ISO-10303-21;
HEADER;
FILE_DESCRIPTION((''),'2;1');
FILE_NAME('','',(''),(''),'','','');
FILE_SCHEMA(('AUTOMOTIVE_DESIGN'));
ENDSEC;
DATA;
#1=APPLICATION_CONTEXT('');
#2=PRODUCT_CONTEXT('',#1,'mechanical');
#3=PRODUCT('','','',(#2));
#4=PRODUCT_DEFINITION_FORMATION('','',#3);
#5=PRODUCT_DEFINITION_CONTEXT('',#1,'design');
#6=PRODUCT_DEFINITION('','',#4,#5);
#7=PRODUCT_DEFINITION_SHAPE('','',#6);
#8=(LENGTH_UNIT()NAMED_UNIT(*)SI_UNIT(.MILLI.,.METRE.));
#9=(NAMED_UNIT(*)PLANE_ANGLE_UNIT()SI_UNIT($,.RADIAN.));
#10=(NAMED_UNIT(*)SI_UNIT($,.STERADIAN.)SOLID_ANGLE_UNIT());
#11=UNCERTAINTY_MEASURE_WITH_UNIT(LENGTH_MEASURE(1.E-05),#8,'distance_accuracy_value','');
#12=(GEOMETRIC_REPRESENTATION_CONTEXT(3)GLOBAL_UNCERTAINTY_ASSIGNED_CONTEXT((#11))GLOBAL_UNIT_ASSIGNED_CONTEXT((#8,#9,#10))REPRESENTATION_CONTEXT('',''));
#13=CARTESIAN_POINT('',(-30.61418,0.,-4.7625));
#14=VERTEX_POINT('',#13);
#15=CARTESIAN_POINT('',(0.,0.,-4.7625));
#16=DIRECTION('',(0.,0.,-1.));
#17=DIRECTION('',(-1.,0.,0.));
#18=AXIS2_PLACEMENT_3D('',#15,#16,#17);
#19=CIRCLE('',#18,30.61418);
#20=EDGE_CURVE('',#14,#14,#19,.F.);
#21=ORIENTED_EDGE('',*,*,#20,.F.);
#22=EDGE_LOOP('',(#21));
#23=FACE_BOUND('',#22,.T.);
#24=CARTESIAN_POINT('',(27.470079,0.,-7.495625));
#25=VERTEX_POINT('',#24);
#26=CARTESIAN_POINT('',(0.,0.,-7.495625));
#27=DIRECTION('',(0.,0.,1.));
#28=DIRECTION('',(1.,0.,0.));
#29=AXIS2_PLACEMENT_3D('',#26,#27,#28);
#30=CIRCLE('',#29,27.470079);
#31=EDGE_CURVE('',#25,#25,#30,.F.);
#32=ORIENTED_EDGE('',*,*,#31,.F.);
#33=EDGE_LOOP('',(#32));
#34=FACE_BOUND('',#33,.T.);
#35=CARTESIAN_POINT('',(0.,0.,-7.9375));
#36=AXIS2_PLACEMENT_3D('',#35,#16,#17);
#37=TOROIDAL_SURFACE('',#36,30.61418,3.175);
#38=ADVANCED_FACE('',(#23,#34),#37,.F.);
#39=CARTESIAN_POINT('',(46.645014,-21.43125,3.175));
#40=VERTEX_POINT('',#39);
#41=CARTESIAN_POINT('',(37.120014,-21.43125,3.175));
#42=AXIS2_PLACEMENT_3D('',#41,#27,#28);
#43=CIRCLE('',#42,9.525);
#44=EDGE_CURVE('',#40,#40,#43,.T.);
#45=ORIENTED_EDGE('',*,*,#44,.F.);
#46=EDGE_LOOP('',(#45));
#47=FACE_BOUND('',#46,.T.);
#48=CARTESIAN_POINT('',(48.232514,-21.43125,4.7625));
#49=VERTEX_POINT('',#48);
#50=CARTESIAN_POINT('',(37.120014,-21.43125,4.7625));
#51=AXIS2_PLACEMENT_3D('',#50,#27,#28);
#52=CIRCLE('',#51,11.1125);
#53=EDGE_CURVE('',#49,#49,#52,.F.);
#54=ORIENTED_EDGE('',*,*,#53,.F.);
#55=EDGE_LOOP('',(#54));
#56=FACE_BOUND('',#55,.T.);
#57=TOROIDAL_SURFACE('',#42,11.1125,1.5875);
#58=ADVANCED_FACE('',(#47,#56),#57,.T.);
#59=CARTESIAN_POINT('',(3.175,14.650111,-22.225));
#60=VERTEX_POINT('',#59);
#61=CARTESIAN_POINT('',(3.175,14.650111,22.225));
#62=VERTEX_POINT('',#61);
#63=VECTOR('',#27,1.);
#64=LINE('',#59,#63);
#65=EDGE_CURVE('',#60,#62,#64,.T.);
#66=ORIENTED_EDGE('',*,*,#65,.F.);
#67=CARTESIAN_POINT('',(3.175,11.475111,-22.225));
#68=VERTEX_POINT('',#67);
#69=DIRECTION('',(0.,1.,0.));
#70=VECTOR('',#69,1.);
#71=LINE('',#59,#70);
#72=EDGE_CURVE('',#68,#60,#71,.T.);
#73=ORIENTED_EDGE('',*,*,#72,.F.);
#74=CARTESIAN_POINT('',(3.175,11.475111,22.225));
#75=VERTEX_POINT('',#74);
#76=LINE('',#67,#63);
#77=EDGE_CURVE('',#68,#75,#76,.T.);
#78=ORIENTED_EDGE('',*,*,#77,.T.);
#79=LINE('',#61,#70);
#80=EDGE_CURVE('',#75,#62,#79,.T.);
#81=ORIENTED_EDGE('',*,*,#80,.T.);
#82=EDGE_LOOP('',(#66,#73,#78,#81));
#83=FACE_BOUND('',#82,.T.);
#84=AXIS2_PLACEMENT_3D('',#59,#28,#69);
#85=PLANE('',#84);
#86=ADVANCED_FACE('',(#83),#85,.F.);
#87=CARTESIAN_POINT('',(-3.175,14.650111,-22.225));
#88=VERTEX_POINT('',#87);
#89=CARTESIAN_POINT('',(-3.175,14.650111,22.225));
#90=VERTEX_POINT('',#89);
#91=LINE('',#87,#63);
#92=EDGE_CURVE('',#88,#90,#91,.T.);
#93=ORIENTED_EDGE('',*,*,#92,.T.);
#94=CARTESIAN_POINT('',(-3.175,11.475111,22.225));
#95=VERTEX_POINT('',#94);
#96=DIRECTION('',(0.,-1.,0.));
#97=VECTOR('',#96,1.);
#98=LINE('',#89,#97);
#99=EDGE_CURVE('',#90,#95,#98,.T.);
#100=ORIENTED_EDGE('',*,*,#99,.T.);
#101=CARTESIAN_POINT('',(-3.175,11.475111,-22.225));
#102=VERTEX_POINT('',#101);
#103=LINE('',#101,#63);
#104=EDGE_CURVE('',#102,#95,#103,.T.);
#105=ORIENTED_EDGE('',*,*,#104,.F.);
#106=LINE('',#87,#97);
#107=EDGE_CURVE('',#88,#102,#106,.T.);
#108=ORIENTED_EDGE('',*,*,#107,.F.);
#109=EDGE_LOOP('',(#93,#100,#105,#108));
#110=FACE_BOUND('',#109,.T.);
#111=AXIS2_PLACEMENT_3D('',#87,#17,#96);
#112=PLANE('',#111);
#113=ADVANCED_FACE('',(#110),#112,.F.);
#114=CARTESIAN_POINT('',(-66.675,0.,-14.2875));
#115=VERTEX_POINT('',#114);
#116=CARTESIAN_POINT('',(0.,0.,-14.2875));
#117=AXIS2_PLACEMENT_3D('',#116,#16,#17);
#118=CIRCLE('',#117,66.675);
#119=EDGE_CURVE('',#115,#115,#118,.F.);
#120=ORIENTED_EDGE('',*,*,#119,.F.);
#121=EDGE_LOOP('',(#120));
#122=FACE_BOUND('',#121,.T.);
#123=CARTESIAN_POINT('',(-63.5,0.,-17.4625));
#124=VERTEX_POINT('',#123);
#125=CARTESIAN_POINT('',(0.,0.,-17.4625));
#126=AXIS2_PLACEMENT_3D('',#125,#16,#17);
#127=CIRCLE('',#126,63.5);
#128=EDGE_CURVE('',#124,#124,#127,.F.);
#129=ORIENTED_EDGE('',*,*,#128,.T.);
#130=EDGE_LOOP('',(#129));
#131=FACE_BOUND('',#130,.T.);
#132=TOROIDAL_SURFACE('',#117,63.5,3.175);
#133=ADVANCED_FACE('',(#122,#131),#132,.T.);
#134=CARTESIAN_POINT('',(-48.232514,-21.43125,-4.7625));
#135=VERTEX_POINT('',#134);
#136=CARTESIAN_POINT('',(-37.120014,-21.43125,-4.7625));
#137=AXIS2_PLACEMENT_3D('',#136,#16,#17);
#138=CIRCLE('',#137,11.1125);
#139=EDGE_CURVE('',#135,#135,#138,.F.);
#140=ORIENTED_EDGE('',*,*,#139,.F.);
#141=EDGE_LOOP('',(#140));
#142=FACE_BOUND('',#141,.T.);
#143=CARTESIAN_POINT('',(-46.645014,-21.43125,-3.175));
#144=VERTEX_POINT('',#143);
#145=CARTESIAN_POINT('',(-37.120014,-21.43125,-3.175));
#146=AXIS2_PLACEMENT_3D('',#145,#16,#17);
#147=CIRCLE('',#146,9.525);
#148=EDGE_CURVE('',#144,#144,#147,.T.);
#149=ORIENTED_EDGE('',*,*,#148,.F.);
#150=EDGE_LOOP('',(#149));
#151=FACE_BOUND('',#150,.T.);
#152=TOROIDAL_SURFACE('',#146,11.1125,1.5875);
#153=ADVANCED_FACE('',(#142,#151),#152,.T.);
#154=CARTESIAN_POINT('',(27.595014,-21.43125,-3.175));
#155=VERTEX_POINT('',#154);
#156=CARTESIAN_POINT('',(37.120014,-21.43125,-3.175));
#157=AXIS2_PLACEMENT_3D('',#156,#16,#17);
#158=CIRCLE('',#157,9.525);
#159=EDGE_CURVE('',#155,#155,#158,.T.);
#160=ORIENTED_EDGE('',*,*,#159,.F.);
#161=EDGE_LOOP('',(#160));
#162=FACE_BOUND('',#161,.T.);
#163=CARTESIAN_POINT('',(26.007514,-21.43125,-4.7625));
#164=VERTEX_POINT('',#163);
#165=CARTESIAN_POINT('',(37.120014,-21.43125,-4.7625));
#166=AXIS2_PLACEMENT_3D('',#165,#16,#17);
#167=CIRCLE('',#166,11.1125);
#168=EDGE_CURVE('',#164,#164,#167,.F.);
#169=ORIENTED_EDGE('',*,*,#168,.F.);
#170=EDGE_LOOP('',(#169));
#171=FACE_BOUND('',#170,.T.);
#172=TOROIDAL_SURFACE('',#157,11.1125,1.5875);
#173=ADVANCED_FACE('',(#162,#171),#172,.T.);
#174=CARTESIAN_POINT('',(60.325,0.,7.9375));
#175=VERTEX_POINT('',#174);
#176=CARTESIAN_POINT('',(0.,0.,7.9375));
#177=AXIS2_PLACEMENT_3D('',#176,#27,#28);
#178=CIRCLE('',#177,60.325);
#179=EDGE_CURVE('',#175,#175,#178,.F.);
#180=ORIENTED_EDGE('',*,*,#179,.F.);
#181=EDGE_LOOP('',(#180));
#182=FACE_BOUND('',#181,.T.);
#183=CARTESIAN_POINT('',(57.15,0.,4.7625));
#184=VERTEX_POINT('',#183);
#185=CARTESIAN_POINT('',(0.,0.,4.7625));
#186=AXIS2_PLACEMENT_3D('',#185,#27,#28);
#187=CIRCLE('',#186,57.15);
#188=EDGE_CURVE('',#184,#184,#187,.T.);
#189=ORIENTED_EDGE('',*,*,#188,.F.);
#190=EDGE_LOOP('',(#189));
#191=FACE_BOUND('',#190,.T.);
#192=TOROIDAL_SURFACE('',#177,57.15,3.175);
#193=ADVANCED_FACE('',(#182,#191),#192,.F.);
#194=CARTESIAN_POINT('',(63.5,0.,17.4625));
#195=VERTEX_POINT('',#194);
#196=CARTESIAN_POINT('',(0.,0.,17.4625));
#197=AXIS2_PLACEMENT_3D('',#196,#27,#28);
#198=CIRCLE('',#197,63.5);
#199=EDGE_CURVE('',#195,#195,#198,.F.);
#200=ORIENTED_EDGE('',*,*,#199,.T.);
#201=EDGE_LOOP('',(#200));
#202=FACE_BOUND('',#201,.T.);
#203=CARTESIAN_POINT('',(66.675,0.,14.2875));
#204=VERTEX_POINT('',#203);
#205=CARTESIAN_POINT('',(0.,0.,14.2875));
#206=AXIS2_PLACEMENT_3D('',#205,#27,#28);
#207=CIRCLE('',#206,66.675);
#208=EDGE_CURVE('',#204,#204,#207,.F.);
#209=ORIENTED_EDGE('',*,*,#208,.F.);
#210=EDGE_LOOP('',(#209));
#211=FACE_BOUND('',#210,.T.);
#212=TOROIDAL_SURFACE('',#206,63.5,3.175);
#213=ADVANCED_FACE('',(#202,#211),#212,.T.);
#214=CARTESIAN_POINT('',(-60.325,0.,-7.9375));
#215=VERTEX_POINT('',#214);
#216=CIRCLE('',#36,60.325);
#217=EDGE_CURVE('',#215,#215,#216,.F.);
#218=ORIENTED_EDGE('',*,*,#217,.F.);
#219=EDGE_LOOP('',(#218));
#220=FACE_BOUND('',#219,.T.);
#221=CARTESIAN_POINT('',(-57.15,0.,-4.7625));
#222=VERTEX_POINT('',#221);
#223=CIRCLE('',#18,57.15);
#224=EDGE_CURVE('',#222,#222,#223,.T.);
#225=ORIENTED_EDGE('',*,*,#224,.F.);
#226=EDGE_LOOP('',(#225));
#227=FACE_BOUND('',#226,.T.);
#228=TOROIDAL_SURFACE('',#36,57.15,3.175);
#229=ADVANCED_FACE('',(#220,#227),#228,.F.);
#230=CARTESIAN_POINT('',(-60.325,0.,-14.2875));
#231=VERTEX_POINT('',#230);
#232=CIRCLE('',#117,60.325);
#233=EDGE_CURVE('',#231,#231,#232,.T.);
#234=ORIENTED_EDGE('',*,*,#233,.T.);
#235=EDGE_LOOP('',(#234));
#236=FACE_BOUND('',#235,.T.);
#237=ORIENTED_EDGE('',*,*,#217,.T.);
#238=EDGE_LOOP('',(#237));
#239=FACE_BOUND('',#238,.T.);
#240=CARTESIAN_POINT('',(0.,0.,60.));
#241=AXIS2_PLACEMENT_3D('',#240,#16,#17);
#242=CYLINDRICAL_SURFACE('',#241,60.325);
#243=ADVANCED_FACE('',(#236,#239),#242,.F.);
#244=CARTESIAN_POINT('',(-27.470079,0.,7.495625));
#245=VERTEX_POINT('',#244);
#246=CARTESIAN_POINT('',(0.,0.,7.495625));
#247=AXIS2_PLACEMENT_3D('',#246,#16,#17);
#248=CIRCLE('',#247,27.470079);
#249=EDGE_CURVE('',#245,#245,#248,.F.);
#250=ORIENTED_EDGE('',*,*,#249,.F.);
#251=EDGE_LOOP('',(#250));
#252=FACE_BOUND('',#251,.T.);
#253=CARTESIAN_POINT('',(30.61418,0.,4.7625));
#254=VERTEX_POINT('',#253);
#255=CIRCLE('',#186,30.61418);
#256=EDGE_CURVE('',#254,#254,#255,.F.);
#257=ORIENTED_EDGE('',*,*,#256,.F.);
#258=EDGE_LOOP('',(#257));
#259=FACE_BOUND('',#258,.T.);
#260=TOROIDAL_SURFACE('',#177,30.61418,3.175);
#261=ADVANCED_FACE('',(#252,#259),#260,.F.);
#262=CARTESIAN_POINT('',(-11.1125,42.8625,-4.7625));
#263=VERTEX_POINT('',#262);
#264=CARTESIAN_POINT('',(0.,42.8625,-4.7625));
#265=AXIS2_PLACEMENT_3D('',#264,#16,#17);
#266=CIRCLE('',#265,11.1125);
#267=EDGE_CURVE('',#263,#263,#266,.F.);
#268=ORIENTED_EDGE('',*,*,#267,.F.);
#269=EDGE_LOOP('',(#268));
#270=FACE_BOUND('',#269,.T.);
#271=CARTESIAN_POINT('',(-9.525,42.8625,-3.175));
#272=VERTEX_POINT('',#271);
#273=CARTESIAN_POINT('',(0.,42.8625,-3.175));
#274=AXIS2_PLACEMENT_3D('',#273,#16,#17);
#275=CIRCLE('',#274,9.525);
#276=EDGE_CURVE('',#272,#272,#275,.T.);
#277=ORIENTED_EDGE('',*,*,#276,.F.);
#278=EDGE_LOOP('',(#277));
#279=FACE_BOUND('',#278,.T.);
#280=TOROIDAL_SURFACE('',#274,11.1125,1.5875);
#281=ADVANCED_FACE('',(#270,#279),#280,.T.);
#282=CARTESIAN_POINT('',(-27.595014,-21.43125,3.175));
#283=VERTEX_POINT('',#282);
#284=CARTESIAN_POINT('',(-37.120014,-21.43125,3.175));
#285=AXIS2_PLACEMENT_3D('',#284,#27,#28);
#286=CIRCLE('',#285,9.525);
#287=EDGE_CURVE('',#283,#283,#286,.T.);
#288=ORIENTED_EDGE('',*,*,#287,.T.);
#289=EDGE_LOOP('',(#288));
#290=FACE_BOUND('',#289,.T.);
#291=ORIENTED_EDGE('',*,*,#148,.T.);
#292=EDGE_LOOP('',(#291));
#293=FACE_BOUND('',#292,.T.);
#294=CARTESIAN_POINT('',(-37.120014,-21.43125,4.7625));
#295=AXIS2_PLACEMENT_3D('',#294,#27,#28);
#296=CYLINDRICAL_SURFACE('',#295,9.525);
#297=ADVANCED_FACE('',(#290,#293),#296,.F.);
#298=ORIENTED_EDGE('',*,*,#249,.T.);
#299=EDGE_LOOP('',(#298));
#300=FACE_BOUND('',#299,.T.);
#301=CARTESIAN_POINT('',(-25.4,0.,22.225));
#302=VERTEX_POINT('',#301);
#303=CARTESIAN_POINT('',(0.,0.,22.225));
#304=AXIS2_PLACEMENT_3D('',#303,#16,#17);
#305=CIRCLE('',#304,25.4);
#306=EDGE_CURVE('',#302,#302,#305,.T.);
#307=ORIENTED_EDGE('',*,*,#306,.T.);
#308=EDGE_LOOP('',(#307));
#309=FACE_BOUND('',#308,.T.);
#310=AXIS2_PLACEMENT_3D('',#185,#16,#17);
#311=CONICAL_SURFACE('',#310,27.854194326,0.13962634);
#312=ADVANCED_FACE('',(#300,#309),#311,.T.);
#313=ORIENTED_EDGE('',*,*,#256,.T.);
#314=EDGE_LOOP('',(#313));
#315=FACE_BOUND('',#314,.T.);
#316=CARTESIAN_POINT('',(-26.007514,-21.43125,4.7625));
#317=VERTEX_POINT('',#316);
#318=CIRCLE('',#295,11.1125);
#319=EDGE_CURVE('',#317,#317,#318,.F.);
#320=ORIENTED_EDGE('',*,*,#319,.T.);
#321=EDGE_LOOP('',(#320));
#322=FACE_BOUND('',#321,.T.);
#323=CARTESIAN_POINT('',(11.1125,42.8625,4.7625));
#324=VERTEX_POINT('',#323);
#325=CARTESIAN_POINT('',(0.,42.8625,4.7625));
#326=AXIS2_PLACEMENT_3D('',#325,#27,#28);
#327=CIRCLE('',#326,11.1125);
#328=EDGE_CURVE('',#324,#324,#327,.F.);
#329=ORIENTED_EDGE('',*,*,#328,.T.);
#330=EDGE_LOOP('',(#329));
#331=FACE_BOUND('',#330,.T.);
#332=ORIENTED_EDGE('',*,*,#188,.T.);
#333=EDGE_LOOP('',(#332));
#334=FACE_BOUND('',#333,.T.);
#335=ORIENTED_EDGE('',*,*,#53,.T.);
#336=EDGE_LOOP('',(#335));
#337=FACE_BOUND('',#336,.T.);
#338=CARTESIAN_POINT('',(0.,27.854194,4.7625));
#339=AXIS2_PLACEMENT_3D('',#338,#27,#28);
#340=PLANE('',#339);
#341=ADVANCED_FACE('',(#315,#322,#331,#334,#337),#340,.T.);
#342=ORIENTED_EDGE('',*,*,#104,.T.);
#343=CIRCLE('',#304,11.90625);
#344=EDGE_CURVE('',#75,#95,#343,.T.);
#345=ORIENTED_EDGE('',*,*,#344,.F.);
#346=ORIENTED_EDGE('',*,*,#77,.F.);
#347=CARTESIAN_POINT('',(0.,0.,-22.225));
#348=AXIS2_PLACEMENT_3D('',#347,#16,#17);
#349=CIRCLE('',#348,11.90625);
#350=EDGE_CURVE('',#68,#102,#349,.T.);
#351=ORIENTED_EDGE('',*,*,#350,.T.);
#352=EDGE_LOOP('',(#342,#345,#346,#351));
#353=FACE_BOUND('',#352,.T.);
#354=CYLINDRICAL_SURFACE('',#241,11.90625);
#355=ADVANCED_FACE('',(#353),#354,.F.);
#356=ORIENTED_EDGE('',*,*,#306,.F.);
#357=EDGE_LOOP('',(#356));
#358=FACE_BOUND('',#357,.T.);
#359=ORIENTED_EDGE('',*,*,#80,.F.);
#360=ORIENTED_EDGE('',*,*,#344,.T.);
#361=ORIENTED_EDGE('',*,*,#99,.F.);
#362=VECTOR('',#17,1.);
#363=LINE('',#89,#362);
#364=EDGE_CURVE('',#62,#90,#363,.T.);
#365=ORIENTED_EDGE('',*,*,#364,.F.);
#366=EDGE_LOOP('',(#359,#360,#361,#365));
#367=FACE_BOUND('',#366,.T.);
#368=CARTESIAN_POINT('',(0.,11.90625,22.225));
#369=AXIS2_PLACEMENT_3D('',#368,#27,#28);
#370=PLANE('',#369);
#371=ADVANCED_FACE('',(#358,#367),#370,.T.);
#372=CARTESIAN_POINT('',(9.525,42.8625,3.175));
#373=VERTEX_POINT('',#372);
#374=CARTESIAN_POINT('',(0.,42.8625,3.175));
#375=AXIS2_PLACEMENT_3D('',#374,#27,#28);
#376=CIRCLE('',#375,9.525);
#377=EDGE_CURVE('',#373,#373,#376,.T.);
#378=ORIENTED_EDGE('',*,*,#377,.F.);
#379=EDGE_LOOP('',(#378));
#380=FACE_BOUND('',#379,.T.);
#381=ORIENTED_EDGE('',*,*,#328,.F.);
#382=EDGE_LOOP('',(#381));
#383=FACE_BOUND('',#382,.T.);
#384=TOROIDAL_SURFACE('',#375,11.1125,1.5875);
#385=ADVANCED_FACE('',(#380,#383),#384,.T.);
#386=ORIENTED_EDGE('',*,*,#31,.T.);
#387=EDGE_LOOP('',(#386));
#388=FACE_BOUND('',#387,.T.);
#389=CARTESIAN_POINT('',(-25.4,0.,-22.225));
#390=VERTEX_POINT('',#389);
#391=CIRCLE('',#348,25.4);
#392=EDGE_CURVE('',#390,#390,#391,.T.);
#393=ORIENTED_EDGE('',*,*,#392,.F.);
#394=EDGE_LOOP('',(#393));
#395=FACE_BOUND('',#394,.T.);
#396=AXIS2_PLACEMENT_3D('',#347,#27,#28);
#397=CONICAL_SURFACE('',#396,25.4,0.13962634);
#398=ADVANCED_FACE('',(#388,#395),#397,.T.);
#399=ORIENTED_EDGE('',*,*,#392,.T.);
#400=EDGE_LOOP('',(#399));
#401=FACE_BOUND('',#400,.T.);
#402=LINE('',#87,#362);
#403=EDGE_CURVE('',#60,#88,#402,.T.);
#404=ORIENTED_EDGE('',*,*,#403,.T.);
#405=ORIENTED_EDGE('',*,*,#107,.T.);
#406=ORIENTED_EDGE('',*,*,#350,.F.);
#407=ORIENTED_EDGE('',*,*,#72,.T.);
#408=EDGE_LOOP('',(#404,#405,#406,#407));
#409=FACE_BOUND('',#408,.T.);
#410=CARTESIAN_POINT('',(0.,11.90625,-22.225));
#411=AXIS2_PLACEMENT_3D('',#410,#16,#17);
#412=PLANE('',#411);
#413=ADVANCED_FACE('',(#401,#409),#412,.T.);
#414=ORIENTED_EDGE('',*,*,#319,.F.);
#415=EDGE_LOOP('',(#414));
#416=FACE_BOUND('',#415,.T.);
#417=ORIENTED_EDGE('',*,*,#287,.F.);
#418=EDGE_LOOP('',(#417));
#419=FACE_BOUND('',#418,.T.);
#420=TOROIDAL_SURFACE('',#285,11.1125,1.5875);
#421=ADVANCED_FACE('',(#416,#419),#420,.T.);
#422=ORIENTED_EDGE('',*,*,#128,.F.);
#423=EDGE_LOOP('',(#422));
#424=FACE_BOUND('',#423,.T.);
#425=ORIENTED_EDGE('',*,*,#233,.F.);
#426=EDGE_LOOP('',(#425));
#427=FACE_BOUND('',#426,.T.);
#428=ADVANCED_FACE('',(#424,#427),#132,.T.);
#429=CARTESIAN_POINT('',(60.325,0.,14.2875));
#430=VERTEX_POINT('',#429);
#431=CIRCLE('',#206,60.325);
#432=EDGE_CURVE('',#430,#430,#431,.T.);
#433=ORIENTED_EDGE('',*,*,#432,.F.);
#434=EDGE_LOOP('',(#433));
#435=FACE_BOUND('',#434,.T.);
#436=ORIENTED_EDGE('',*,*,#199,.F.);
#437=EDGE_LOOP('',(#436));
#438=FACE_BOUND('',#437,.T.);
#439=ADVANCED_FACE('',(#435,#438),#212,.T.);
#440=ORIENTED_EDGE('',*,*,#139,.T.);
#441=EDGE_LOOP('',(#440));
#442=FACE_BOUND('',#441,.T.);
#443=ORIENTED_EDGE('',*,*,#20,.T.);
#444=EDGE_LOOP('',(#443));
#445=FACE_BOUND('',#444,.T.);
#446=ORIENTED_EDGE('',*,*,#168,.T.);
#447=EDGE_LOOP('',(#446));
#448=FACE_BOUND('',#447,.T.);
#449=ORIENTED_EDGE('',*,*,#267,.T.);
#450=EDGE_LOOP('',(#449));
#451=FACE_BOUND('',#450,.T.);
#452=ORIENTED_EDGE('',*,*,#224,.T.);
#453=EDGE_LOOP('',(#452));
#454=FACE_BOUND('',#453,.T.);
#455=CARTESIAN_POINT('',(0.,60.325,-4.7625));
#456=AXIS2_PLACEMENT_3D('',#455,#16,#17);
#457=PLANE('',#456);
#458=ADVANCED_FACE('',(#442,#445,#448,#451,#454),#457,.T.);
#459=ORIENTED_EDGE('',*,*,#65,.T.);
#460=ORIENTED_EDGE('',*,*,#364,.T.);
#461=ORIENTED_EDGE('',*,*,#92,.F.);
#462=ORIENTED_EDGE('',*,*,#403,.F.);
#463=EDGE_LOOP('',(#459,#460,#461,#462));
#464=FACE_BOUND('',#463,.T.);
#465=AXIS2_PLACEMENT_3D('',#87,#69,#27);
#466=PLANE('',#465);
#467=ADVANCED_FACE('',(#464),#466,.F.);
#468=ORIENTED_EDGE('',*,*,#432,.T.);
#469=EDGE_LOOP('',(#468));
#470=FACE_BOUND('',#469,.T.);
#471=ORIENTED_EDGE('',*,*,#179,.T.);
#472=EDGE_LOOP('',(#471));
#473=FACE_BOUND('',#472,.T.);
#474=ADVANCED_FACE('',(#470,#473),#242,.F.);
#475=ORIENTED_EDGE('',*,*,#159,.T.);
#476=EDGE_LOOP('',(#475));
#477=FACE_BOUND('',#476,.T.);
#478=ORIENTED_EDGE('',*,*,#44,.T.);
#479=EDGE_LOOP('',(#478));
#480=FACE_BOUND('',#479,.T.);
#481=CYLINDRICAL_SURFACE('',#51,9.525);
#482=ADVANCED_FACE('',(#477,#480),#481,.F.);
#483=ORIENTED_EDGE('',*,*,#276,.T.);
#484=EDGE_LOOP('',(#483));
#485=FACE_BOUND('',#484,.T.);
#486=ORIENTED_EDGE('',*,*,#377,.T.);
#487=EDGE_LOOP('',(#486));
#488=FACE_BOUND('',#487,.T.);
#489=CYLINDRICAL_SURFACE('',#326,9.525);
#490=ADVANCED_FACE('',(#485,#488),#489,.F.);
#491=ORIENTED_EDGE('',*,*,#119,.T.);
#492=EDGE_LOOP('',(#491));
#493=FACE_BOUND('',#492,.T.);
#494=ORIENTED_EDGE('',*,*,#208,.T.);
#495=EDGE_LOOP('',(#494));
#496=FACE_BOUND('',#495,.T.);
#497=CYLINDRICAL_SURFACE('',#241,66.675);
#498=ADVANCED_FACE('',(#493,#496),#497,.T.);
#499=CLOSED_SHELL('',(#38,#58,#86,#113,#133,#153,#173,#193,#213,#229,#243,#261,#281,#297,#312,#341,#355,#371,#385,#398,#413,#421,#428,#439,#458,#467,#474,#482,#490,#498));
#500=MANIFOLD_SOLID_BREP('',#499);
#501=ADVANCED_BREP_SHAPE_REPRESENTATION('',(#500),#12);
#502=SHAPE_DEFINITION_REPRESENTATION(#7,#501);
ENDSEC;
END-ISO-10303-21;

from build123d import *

# Parameters (mm, degrees)
DIAM_TRE_DU_PER_AGE_3_4_0_75_2_D = 19.05
R_P_TITION_CIRCULAIRE1_COUNT     = 3
CONG_1_R                         = 1.5875
CONG_2_R                         = 3.175
CONG_3_R                         = 3.175
ESQUISSE4_W                      = 6.35
ESQUISSE4_H                      = 3.175
ENL_V_MAT_EXTRU_1_DEPTH          = 105.244490326


with BuildPart() as part:
    # Esquisse1 → Base-Révolution (revolve)
    with BuildSketch(Plane(origin=(0, 0, 0), x_dir=(0, 0, -1), z_dir=(1, 0, 0)), mode=Mode.PRIVATE) as base_r_volution_sk:
        Polygon((-22.225, 11.90625), (22.225, 11.90625), (22.225, 25.4), (4.7625, 27.854194326), (4.7625, 60.325), (17.4625, 60.325), (17.4625, 66.675), (-17.4625, 66.675), (-17.4625, 60.325), (-4.7625, 60.325), (-4.7625, 27.854194326), (-22.225, 25.4), align=None)
    revolve(base_r_volution_sk.sketch.rotate(Axis((0, 0, 60), (0, 0, -1)), 270), axis=Axis((0, 0, 60), (0, 0, -1)))

    # Diamètre du perçage 3/4 (0.75)2 (through all)
    with Locations(Plane.XY.offset(4.7625)):
        with Locations((0, 42.8625)):
            diam_tre_du_per_age_3_4_0_75_2 = Hole(DIAM_TRE_DU_PER_AGE_3_4_0_75_2_D / 2)

    # Répétition circulaire1: Diamètre du perçage 3/4 (0.75)2 ×3 about axis
    r_p_tition_circulaire1_axis = Axis((0, 0, 0), (0, 0, 1))
    for i in range(1, R_P_TITION_CIRCULAIRE1_COUNT):
        add(diam_tre_du_per_age_3_4_0_75_2.rotate(r_p_tition_circulaire1_axis, i * 360 / R_P_TITION_CIRCULAIRE1_COUNT), mode=Mode.SUBTRACT)

    # Congé1
    cong_1_edges = [part.edges().sort_by_distance(p)[0] for p in [
        (9.525, 42.8625, -4.7625),
        (9.525, 42.8625, 4.7625),
        (-41.88251387, -13.182358029, -4.7625),
        (-41.88251387, -13.182358029, 4.7625),
        (32.35751387, -29.680141971, -4.7625),
        (32.35751387, -29.680141971, 4.7625),
    ]]
    fillet(cong_1_edges, radius=CONG_1_R)

    # Congé2
    cong_2_edges = [part.edges().sort_by_distance(p)[0] for p in [
        (60.325, 0, -4.7625),
        (60.325, 0, -17.4625),
        (60.325, 0, 17.4625),
        (60.325, 0, 4.7625),
        (27.854194326, 0, 4.7625),
        (27.854194326, 0, -4.7625),
    ]]
    fillet(cong_2_edges, radius=CONG_2_R)

    # Congé3
    cong_3_edges = [part.edges().sort_by_distance(p)[0] for p in [
        (66.675, 0, -17.4625),
        (66.675, 0, 17.4625),
    ]]
    fillet(cong_3_edges, radius=CONG_3_R - 0.0001)  # a hair under: the kernel refuses the full size

    # Esquisse4 → Enlèv. mat.-Extru.1 (cut, through all)
    with BuildSketch(Plane.XY.offset(22.225)):
        with Locations((0, 13.062610634)):
            Rectangle(ESQUISSE4_W, ESQUISSE4_H)
    extrude(amount=-ENL_V_MAT_EXTRU_1_DEPTH, mode=Mode.SUBTRACT)


solid = part.part
